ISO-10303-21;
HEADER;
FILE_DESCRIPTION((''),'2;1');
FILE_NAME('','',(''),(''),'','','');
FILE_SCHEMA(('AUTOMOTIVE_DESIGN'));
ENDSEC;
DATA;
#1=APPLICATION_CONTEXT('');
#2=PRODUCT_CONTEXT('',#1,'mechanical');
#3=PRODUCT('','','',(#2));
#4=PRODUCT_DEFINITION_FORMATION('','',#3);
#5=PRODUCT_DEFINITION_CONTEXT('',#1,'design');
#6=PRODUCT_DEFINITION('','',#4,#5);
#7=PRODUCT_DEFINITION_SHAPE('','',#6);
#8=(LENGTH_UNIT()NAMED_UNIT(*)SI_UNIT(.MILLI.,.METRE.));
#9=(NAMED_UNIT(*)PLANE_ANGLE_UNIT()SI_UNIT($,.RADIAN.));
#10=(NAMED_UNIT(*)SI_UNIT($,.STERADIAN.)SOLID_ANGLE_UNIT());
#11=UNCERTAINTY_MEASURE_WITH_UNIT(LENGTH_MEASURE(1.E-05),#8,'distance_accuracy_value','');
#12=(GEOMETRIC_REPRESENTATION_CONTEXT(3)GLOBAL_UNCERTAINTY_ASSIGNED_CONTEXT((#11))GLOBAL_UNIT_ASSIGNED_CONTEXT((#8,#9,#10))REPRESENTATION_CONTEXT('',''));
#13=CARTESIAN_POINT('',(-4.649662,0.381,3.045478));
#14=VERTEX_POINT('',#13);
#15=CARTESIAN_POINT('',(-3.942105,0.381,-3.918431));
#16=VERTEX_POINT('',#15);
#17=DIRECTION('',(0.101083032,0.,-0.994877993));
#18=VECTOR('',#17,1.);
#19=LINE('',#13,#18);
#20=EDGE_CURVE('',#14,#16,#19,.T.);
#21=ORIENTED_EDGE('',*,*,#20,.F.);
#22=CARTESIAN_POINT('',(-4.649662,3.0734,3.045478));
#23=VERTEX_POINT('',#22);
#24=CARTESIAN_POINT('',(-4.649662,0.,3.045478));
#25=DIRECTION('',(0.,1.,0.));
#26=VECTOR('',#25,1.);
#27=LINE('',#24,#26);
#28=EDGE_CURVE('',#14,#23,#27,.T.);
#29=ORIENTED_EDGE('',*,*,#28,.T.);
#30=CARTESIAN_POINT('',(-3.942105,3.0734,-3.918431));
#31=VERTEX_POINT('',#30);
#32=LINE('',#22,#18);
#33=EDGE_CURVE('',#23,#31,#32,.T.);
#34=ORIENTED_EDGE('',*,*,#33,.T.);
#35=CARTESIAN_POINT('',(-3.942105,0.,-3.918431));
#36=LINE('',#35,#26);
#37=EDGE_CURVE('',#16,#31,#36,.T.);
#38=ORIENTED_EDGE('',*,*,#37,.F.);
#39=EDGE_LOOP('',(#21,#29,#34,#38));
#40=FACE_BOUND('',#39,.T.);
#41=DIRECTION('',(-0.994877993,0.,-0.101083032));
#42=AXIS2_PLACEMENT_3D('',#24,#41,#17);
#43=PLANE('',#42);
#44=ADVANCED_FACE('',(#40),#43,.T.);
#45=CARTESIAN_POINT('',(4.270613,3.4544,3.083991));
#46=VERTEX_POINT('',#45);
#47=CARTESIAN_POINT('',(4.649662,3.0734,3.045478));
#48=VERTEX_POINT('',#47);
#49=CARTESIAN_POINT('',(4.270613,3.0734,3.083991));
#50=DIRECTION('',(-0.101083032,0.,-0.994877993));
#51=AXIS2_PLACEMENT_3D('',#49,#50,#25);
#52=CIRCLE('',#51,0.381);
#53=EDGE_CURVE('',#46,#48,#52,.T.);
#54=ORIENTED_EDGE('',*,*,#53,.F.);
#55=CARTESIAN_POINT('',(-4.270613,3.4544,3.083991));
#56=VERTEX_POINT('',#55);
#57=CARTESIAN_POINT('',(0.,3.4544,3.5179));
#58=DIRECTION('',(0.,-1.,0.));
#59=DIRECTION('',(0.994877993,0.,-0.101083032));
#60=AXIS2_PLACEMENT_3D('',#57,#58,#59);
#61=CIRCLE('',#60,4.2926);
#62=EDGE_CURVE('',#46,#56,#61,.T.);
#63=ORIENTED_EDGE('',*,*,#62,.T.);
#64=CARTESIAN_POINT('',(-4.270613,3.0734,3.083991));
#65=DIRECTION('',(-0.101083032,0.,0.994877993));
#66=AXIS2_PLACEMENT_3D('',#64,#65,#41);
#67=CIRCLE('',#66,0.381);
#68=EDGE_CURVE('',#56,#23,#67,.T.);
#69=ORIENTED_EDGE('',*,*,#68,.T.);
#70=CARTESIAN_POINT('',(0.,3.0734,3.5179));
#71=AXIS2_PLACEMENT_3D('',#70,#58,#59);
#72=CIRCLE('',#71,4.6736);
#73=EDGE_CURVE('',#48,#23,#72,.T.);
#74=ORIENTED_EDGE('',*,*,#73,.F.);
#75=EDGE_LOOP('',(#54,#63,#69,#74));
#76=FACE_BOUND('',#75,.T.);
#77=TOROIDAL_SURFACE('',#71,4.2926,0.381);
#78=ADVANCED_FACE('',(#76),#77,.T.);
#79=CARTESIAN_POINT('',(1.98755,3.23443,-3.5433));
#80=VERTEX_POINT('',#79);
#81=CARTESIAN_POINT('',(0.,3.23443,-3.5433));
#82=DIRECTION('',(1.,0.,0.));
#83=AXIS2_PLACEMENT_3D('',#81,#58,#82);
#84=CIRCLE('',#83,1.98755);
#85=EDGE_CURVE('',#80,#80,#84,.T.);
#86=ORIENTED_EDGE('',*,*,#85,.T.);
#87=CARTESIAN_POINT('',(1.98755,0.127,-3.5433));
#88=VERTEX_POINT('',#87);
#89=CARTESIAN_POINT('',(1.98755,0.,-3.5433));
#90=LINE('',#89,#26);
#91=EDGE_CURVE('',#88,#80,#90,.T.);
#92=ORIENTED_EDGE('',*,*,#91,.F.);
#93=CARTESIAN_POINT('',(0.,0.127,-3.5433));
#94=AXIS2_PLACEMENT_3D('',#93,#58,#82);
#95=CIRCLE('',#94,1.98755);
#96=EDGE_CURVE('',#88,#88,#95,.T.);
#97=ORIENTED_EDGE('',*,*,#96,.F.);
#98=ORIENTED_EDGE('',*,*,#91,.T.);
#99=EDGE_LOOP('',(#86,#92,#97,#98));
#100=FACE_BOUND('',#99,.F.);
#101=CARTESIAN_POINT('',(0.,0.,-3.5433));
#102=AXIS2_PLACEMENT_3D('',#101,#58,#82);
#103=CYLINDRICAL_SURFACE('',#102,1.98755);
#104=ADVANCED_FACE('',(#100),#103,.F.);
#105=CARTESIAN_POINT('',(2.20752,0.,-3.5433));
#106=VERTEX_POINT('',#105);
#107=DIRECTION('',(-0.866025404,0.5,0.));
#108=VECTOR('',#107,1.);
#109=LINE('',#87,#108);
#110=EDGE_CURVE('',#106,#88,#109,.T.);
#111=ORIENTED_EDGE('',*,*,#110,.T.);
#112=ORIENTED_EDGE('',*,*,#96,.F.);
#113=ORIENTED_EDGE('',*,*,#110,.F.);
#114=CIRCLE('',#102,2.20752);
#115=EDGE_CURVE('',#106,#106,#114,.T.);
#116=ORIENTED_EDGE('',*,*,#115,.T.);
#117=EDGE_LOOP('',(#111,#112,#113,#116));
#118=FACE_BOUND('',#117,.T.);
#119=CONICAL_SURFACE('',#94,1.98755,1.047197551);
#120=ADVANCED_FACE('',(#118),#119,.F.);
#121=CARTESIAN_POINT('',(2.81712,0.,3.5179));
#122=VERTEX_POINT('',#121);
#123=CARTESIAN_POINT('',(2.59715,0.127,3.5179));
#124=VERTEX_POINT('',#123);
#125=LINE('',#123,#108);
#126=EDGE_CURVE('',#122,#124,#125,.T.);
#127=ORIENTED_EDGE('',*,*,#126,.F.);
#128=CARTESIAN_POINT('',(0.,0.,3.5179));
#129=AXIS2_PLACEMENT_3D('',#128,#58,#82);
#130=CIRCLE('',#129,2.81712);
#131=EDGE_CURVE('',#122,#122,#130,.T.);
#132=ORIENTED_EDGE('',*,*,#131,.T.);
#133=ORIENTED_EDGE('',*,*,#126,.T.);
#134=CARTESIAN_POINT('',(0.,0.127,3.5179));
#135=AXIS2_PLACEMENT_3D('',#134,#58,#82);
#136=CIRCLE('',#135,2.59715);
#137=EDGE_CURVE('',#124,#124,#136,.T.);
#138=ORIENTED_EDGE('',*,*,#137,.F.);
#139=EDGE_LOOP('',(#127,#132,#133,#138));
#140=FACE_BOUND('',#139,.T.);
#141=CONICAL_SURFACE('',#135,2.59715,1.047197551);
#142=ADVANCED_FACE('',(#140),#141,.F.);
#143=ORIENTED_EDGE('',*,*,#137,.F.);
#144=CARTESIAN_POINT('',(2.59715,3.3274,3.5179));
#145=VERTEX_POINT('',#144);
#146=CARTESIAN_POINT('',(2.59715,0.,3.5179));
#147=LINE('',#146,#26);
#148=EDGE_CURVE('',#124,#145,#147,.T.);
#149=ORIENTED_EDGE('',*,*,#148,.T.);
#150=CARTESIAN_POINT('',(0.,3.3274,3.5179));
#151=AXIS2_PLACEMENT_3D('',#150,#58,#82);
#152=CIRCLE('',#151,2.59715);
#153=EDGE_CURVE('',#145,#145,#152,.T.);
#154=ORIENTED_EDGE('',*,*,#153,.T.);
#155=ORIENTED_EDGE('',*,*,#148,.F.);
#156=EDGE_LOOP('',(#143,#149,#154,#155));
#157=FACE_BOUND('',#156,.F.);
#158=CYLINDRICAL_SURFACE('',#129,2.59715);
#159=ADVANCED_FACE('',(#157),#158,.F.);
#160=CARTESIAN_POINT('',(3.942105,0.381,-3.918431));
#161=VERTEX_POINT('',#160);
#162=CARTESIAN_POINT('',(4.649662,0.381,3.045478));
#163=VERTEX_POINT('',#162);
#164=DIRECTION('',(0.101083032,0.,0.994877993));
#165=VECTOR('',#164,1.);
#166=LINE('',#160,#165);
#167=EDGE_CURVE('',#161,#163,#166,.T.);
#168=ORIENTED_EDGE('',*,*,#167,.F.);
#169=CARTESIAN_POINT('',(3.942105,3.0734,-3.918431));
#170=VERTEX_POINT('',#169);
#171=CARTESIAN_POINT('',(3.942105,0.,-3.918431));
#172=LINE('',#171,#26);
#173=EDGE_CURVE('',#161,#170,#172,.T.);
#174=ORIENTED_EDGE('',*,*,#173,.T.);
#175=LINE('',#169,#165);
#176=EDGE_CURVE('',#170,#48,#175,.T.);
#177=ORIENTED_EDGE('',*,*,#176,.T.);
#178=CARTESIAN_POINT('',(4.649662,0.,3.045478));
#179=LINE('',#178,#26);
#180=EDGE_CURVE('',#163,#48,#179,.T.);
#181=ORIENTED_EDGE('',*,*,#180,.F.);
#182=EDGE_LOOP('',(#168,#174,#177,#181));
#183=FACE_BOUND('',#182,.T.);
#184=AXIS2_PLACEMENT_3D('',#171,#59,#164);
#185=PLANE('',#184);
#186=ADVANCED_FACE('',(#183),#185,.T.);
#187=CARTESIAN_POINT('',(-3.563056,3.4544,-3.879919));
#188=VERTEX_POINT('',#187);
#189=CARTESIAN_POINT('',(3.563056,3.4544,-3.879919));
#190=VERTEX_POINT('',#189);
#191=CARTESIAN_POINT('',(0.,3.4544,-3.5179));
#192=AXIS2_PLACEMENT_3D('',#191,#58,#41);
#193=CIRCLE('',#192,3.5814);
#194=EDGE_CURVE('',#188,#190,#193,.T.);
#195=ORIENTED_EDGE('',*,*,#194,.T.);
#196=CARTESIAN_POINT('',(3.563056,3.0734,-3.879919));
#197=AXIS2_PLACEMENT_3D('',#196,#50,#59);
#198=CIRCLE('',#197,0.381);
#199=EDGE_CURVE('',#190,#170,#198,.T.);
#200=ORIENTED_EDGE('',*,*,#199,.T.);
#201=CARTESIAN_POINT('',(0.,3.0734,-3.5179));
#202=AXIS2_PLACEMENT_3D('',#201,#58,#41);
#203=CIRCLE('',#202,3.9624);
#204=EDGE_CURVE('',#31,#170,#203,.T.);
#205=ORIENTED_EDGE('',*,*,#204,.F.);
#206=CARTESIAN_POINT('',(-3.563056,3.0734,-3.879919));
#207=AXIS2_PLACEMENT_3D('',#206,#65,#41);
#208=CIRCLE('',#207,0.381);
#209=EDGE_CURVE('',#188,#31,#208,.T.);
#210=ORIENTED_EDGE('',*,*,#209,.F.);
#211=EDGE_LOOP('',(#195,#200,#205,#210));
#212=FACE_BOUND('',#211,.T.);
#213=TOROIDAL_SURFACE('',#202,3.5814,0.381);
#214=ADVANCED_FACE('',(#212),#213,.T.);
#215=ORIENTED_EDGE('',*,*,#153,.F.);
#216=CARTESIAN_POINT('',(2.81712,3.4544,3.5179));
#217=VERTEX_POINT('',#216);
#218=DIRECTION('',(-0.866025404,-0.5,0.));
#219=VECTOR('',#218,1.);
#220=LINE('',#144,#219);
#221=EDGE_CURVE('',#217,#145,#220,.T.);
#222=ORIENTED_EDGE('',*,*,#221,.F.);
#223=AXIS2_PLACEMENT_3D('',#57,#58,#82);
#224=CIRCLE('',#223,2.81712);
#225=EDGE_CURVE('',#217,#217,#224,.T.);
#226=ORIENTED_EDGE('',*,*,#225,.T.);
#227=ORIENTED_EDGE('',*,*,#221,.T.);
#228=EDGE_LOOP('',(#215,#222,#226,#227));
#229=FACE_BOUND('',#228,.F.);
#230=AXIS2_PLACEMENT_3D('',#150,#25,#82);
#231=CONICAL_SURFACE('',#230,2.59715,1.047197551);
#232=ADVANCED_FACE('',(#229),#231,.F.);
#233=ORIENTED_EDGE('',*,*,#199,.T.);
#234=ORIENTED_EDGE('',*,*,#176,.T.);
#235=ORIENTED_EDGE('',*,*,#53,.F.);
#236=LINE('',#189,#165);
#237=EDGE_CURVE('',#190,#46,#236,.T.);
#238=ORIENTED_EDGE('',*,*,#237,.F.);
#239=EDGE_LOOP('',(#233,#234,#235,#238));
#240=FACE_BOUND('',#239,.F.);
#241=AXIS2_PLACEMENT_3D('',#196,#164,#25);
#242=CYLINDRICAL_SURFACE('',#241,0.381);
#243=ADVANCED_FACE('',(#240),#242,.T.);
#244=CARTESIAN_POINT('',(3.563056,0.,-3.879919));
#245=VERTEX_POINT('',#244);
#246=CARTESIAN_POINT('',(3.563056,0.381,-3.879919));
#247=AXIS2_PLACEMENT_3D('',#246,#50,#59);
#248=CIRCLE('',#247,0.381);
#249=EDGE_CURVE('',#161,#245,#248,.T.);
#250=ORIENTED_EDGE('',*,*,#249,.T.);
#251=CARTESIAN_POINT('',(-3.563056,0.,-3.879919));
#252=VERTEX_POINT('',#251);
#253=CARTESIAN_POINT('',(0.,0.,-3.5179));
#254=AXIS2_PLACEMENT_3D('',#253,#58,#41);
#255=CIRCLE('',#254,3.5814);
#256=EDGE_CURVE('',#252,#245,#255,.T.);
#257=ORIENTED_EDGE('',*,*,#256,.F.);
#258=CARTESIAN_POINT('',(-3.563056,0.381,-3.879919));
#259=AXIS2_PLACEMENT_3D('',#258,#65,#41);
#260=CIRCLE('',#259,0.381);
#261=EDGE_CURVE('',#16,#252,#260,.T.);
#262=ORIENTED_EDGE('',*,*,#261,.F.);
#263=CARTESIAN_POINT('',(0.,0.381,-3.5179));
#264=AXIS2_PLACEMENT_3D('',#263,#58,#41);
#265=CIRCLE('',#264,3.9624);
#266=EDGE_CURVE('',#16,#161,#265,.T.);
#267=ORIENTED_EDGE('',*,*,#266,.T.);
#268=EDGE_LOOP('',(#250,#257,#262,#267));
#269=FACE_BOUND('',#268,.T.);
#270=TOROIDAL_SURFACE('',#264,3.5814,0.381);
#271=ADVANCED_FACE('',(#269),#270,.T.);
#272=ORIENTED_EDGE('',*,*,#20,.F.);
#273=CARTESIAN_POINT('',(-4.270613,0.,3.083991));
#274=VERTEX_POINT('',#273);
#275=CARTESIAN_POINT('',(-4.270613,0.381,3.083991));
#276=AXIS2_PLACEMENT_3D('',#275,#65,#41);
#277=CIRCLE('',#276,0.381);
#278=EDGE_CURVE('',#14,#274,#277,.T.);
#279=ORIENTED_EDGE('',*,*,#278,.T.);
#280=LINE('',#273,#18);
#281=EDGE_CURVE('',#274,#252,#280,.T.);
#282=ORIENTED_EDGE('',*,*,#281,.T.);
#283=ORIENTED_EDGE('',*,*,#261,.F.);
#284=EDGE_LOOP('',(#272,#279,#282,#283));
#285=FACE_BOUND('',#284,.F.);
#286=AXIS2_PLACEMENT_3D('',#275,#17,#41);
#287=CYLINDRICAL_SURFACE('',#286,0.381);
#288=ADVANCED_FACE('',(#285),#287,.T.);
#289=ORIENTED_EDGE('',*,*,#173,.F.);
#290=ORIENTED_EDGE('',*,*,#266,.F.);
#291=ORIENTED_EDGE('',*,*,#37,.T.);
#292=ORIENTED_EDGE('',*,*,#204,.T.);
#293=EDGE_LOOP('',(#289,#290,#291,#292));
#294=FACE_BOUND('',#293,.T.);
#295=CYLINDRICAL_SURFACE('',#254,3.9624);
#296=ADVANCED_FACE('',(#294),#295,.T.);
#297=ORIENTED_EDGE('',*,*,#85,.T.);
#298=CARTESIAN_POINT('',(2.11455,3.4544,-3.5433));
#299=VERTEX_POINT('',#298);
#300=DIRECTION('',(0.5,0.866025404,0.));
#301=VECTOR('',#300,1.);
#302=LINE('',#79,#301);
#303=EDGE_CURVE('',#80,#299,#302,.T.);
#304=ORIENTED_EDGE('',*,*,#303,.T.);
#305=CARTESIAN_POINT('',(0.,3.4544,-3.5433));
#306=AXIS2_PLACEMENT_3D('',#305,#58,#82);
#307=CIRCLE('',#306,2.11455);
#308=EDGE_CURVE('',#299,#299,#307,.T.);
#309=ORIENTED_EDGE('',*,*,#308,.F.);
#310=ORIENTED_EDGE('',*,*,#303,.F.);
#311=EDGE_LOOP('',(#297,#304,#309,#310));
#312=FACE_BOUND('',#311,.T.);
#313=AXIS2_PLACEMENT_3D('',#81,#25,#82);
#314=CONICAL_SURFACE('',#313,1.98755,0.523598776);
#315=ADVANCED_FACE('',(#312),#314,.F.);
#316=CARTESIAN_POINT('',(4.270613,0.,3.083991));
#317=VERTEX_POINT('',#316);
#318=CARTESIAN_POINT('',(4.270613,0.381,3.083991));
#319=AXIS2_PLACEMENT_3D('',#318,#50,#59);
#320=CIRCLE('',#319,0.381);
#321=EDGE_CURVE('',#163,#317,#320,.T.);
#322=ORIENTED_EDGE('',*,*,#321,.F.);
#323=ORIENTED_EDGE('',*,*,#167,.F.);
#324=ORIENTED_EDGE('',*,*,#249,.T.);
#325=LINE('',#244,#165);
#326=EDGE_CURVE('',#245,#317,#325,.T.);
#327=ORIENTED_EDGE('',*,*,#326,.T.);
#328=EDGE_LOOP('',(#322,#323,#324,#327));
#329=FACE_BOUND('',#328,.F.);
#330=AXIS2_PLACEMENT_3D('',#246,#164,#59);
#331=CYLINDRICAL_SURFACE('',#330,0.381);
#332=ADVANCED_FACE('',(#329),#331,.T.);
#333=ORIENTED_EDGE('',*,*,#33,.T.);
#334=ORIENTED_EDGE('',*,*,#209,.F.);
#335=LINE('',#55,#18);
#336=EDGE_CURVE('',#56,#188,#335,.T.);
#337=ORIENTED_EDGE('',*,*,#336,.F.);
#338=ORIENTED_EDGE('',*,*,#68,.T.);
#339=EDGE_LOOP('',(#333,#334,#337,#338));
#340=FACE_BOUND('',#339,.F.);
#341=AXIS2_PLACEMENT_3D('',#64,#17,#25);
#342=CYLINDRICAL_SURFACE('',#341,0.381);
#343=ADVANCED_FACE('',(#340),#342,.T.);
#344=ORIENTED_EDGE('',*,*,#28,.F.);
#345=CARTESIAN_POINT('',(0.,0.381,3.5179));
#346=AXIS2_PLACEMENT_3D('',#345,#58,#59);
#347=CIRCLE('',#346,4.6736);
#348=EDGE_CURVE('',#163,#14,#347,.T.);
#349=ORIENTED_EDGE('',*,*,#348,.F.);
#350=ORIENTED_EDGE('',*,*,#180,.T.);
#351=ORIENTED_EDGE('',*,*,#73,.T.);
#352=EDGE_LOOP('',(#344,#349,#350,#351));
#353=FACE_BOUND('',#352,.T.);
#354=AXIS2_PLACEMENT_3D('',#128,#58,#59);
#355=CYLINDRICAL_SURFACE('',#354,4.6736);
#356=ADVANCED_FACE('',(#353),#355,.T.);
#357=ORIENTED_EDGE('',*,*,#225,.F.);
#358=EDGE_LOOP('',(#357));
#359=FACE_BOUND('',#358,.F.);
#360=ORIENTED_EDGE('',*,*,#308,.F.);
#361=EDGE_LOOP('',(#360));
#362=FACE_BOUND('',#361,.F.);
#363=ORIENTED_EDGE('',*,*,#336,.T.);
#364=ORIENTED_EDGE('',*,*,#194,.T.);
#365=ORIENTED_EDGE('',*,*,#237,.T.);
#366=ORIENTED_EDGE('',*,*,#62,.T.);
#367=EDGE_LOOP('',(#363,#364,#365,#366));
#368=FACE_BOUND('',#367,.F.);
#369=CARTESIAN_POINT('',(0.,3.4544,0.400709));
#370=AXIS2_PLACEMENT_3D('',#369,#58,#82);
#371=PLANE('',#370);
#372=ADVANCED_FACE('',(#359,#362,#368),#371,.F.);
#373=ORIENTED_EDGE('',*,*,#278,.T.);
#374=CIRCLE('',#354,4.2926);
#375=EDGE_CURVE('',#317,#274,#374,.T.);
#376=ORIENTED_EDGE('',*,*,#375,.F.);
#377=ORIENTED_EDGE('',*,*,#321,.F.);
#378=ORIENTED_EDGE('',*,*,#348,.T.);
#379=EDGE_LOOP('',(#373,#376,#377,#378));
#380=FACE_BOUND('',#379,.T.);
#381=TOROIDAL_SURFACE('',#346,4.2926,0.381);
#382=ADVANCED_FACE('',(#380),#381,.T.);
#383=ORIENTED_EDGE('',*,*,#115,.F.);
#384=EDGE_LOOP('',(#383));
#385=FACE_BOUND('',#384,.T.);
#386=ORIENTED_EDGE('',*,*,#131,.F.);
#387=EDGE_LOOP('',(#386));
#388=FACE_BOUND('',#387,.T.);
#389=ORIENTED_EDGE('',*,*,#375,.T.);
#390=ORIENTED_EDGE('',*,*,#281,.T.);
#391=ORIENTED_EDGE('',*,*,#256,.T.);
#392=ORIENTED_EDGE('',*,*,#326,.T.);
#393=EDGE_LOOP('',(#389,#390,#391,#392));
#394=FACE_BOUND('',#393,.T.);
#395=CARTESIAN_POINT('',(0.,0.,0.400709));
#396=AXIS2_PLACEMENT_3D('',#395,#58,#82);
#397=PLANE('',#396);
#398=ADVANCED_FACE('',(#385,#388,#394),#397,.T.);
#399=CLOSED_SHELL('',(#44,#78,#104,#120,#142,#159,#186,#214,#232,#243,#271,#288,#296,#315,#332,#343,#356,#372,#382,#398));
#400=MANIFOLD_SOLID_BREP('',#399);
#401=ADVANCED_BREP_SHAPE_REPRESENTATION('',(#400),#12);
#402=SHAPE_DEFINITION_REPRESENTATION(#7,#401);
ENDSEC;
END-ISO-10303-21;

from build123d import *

# Parameters (mm, degrees)
F1_DEPTH    = 3.4544
F2_R        = 2.59715
F2_R_2      = 1.98755
F3_DEPTH    = 3.4554
F4_C1_SIZE2 = 0.127
F4_C1_SIZE  = 0.2199704526
F4_C2_SIZE2 = 0.127
F4_C2_SIZE  = 0.2199704526
F4_C3_SIZE2 = 0.127
F4_C3_SIZE  = 0.2199704526
F4_C4_SIZE2 = 0.127
F4_C4_SIZE  = 0.2199704526
F5_R        = 0.381


with BuildPart() as f1:
    # F0 (on Front) → F1 (new body)
    with BuildSketch(Plane.XZ):
        with BuildLine():
            Line((3.9421045586, -3.9184314079), (4.6496617871, 3.0454783394))
            ThreePointArc((4.6496617871, 3.0454783394), (0, 8.1915), (-4.6496617871, 3.0454783394))
            Line((-4.6496617871, 3.0454783394), (-3.9421045586, -3.9184314079))
            ThreePointArc((-3.9421045586, -3.9184314079), (0, -7.4803), (3.9421045586, -3.9184314079))
        make_face()
    extrude(amount=-F1_DEPTH)

    # F2 (on face) → F3 (cut, through all)
    with BuildSketch(Plane.XZ):
        with Locations((0, 3.5179)):
            Circle(F2_R)
        with Locations((0, -3.5433)):
            Circle(F2_R_2)
    extrude(amount=-F3_DEPTH, mode=Mode.SUBTRACT)

    # F4: chamfer of 0.127 x 0.2199704526 on 4 edges, made by hand

    # F4_c1
    f4_c1_edges = [f1.edges().sort_by_distance(p)[0] for p in [
        (-1.98755, 0, -3.5433),
    ]]
    f4_c1_side = f1.faces().sort_by_distance((-1.99009, 0, -3.5433))[0]
    chamfer(f4_c1_edges, length=F4_C1_SIZE, length2=F4_C1_SIZE2, reference=f4_c1_side)

    # F4_c2
    f4_c2_edges = [f1.edges().sort_by_distance(p)[0] for p in [
        (-2.59715, 0, 3.5179),
    ]]
    f4_c2_side = f1.faces().sort_by_distance((-2.59969, 0, 3.5179))[0]
    chamfer(f4_c2_edges, length=F4_C2_SIZE, length2=F4_C2_SIZE2, reference=f4_c2_side)

    # F4_c3
    f4_c3_edges = [f1.edges().sort_by_distance(p)[0] for p in [
        (-1.98755, 3.4544, -3.5433),
    ]]
    f4_c3_side = f1.faces().sort_by_distance((-1.98755, 3.45186, -3.5433))[0]
    chamfer(f4_c3_edges, length=F4_C3_SIZE, length2=F4_C3_SIZE2, reference=f4_c3_side)

    # F4_c4
    f4_c4_edges = [f1.edges().sort_by_distance(p)[0] for p in [
        (-2.59715, 3.4544, 3.5179),
    ]]
    f4_c4_side = f1.faces().sort_by_distance((-2.59969, 3.4544, 3.5179))[0]
    chamfer(f4_c4_edges, length=F4_C4_SIZE, length2=F4_C4_SIZE2, reference=f4_c4_side)

    # F5
    f5_edges = [f1.edges().sort_by_distance(p)[0] for p in [
        (0, 0, -7.4803),
        (0, 3.4544, -7.4803),
        (4.295883, 3.4544, -0.436477),
        (0, 3.4544, 8.1915),
        (-4.295883, 3.4544, -0.436477),
        (4.295883, 0, -0.436477),
        (0, 0, 8.1915),
        (-4.295883, 0, -0.436477),
    ]]
    fillet(f5_edges, radius=F5_R)


solid = f1.part
